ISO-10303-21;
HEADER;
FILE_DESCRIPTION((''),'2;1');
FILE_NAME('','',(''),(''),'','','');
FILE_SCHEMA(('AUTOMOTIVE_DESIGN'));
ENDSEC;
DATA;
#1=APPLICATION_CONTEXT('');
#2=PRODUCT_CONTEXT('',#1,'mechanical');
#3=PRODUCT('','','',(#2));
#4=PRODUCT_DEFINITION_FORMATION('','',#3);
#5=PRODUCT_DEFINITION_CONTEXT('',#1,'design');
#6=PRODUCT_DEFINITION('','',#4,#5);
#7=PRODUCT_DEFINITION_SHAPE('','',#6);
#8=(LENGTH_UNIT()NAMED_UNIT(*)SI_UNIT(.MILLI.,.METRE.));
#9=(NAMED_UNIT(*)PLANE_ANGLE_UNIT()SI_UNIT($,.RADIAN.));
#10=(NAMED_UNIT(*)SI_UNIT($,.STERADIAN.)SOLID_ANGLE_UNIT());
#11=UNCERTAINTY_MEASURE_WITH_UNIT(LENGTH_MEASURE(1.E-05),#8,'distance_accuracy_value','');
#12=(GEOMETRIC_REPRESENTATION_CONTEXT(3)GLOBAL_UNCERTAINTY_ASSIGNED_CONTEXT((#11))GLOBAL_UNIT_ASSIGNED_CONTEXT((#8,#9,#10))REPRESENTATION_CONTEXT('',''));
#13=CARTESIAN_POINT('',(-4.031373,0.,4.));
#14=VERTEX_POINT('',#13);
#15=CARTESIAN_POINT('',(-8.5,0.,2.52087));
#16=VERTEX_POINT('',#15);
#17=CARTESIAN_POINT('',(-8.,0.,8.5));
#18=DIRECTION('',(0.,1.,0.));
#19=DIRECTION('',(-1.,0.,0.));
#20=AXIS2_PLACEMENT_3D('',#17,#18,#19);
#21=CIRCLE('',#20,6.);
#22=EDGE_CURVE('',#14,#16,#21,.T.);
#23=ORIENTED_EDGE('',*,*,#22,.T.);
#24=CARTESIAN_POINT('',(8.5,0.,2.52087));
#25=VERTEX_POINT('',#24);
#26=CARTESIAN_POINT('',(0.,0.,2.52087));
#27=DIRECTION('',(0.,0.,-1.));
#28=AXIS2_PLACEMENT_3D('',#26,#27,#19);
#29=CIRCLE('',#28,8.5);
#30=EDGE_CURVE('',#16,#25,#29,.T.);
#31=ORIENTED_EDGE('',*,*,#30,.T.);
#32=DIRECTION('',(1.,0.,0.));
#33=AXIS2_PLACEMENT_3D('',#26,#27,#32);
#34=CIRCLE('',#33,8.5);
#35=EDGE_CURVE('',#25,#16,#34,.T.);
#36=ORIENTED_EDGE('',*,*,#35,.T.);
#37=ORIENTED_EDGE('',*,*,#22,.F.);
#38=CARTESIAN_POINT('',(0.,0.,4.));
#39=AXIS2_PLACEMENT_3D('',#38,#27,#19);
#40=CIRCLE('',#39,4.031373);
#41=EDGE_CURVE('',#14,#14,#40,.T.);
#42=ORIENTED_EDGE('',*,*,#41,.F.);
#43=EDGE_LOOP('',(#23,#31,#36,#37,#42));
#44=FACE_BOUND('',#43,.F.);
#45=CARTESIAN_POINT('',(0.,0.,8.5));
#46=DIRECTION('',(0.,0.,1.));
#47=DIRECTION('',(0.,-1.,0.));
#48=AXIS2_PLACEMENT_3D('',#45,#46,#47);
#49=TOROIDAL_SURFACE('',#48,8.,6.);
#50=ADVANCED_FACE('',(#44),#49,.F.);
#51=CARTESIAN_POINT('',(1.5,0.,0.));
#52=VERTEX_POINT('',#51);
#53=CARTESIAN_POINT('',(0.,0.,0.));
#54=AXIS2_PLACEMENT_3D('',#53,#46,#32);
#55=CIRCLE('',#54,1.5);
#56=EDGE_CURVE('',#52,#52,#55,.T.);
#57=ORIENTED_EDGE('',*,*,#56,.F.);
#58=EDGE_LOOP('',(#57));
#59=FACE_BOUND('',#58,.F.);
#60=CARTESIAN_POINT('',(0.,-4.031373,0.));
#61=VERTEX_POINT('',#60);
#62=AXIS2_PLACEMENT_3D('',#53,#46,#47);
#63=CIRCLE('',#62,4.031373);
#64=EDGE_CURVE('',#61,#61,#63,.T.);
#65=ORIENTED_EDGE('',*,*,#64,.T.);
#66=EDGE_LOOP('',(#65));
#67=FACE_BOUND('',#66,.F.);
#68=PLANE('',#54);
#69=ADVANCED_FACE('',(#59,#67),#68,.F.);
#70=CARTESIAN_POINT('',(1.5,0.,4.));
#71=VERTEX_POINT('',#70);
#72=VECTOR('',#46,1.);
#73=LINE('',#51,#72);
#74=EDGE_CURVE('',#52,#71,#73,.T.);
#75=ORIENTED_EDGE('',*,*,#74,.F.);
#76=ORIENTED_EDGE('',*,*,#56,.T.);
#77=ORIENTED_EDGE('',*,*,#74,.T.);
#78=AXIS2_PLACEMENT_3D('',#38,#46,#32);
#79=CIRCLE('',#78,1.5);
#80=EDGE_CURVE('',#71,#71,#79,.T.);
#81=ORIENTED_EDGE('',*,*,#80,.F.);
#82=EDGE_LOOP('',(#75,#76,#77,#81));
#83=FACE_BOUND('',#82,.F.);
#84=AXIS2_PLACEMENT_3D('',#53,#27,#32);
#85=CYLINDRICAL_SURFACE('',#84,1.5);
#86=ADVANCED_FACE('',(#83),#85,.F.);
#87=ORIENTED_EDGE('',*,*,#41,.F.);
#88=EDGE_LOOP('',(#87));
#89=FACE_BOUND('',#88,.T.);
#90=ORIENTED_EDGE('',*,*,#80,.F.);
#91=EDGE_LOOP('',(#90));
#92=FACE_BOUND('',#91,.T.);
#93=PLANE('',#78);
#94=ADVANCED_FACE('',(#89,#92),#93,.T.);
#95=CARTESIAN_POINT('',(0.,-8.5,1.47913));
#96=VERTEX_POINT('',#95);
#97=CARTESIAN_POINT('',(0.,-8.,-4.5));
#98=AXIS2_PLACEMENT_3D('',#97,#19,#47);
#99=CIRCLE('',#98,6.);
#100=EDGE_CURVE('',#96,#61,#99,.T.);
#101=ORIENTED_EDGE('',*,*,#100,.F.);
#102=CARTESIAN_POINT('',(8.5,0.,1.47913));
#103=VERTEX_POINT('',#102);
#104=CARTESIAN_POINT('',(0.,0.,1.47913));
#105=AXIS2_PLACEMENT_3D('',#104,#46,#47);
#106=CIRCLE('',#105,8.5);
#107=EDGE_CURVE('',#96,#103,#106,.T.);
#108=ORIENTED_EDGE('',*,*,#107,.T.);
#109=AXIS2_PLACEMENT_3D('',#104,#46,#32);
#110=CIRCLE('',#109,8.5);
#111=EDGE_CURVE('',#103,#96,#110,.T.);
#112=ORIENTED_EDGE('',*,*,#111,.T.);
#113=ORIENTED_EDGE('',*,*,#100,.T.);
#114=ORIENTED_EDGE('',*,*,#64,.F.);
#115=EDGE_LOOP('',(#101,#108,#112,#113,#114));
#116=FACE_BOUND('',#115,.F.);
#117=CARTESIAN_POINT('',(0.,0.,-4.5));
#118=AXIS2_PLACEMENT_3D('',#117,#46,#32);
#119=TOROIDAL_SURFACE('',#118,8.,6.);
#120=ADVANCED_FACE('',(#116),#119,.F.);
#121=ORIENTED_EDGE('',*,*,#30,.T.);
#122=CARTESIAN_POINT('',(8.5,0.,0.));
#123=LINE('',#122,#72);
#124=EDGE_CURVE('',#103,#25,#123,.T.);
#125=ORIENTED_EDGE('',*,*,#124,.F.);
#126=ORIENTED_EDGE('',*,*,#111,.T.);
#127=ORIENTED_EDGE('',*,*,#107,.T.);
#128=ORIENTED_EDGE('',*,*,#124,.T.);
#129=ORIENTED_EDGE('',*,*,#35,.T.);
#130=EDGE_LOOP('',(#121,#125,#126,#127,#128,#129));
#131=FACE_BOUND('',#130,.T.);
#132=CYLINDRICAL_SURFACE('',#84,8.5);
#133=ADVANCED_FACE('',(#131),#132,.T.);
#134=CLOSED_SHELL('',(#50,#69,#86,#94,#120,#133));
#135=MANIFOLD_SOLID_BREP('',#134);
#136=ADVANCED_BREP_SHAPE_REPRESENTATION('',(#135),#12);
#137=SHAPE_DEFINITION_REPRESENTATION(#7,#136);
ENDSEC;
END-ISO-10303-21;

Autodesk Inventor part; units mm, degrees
ref_plane "YZ Plane" through (0, 0, 0) normal (1, 0, 0) x (0, 1, 0)
ref_plane "XZ Plane" through (0, 0, 0) normal (0, 1, 0) x (-1, 0, 0)
ref_plane "XY Plane" through (0, 0, 0) normal (0, 0, 1) x (1, 0, 0)
sketch "スケッチ1" plane through (0, 0, 0) normal (0, 0, 1) x (1, 0, 0)
  circle A0 centre (0, 0) radius 1.5
  circle A1 centre (0, 0) radius 8.5
  dimension "d0" = 3
  dimension "d1" = 17
extrude "押し出し1" add sketch "スケッチ1" along normal blind 4
sketch "スケッチ2" plane through (0, 0, 0) normal (1, 0, 0) x (0, 1, 0)
  circle A0 centre (-8, 8.5) radius 6
  circle A1 centre (-8, -4.5) radius 6
  line L0 (-1.5, 4) -> (1.5, 4) projected
  line L1 (1.5, 0) -> (-1.5, 0) projected
  line L2 (-2, 12.4416) -> (-2, -10.3057) construction
  line L3 (-1.5, 0) -> (-1.5, 4) construction
  line L4 (-8, 8.5) -> (-8, -4.5) construction
  line L5 (-8, 8.5) -> (-8, 2) construction
  line L6 (-2, 4) -> (-2, 2)
  line L7 (-2, 4) -> (-2, -3)
  line L8 (8.5, 4) -> (-8.5, 4) projected
  line L9 (-1.5, 0) -> (-1.5, 4) projected
  line L10 (-2, 2) -> (-8, 2)
  point P0 (0, 0)
  dimension "d4" = 12
  dimension "d5" = 12
  dimension "d6" = 0.5
  dimension "d7" = 1
  dimension "d8" = 4
  dimension "d9" = 13
  dimension "d10" = 6.5
  dimension "d11" = 2
  dimension "d12" = 7
sketch3d "3D スケッチ1"
  arc A0 (8.5, 0, 4) -> (0, 8.5, 4) centre (0, 0, 4) ccw
  arc A1 (0, 8.5, 4) -> (-8.5, 0, 4) centre (0, 0, 4) ccw
  arc A2 (-8.5, 0, 4) -> (0, -8.5, 4) centre (0, 0, 4) ccw
  arc A3 (0, -8.5, 4) -> (8.5, 0, 4) centre (0, 0, 4) ccw
sweep "スイープ1" cut profiles "スケッチ2" path "3D スケッチ1"
properties part number "ダンパー１０" material "アルミニウム 2014-T6"
